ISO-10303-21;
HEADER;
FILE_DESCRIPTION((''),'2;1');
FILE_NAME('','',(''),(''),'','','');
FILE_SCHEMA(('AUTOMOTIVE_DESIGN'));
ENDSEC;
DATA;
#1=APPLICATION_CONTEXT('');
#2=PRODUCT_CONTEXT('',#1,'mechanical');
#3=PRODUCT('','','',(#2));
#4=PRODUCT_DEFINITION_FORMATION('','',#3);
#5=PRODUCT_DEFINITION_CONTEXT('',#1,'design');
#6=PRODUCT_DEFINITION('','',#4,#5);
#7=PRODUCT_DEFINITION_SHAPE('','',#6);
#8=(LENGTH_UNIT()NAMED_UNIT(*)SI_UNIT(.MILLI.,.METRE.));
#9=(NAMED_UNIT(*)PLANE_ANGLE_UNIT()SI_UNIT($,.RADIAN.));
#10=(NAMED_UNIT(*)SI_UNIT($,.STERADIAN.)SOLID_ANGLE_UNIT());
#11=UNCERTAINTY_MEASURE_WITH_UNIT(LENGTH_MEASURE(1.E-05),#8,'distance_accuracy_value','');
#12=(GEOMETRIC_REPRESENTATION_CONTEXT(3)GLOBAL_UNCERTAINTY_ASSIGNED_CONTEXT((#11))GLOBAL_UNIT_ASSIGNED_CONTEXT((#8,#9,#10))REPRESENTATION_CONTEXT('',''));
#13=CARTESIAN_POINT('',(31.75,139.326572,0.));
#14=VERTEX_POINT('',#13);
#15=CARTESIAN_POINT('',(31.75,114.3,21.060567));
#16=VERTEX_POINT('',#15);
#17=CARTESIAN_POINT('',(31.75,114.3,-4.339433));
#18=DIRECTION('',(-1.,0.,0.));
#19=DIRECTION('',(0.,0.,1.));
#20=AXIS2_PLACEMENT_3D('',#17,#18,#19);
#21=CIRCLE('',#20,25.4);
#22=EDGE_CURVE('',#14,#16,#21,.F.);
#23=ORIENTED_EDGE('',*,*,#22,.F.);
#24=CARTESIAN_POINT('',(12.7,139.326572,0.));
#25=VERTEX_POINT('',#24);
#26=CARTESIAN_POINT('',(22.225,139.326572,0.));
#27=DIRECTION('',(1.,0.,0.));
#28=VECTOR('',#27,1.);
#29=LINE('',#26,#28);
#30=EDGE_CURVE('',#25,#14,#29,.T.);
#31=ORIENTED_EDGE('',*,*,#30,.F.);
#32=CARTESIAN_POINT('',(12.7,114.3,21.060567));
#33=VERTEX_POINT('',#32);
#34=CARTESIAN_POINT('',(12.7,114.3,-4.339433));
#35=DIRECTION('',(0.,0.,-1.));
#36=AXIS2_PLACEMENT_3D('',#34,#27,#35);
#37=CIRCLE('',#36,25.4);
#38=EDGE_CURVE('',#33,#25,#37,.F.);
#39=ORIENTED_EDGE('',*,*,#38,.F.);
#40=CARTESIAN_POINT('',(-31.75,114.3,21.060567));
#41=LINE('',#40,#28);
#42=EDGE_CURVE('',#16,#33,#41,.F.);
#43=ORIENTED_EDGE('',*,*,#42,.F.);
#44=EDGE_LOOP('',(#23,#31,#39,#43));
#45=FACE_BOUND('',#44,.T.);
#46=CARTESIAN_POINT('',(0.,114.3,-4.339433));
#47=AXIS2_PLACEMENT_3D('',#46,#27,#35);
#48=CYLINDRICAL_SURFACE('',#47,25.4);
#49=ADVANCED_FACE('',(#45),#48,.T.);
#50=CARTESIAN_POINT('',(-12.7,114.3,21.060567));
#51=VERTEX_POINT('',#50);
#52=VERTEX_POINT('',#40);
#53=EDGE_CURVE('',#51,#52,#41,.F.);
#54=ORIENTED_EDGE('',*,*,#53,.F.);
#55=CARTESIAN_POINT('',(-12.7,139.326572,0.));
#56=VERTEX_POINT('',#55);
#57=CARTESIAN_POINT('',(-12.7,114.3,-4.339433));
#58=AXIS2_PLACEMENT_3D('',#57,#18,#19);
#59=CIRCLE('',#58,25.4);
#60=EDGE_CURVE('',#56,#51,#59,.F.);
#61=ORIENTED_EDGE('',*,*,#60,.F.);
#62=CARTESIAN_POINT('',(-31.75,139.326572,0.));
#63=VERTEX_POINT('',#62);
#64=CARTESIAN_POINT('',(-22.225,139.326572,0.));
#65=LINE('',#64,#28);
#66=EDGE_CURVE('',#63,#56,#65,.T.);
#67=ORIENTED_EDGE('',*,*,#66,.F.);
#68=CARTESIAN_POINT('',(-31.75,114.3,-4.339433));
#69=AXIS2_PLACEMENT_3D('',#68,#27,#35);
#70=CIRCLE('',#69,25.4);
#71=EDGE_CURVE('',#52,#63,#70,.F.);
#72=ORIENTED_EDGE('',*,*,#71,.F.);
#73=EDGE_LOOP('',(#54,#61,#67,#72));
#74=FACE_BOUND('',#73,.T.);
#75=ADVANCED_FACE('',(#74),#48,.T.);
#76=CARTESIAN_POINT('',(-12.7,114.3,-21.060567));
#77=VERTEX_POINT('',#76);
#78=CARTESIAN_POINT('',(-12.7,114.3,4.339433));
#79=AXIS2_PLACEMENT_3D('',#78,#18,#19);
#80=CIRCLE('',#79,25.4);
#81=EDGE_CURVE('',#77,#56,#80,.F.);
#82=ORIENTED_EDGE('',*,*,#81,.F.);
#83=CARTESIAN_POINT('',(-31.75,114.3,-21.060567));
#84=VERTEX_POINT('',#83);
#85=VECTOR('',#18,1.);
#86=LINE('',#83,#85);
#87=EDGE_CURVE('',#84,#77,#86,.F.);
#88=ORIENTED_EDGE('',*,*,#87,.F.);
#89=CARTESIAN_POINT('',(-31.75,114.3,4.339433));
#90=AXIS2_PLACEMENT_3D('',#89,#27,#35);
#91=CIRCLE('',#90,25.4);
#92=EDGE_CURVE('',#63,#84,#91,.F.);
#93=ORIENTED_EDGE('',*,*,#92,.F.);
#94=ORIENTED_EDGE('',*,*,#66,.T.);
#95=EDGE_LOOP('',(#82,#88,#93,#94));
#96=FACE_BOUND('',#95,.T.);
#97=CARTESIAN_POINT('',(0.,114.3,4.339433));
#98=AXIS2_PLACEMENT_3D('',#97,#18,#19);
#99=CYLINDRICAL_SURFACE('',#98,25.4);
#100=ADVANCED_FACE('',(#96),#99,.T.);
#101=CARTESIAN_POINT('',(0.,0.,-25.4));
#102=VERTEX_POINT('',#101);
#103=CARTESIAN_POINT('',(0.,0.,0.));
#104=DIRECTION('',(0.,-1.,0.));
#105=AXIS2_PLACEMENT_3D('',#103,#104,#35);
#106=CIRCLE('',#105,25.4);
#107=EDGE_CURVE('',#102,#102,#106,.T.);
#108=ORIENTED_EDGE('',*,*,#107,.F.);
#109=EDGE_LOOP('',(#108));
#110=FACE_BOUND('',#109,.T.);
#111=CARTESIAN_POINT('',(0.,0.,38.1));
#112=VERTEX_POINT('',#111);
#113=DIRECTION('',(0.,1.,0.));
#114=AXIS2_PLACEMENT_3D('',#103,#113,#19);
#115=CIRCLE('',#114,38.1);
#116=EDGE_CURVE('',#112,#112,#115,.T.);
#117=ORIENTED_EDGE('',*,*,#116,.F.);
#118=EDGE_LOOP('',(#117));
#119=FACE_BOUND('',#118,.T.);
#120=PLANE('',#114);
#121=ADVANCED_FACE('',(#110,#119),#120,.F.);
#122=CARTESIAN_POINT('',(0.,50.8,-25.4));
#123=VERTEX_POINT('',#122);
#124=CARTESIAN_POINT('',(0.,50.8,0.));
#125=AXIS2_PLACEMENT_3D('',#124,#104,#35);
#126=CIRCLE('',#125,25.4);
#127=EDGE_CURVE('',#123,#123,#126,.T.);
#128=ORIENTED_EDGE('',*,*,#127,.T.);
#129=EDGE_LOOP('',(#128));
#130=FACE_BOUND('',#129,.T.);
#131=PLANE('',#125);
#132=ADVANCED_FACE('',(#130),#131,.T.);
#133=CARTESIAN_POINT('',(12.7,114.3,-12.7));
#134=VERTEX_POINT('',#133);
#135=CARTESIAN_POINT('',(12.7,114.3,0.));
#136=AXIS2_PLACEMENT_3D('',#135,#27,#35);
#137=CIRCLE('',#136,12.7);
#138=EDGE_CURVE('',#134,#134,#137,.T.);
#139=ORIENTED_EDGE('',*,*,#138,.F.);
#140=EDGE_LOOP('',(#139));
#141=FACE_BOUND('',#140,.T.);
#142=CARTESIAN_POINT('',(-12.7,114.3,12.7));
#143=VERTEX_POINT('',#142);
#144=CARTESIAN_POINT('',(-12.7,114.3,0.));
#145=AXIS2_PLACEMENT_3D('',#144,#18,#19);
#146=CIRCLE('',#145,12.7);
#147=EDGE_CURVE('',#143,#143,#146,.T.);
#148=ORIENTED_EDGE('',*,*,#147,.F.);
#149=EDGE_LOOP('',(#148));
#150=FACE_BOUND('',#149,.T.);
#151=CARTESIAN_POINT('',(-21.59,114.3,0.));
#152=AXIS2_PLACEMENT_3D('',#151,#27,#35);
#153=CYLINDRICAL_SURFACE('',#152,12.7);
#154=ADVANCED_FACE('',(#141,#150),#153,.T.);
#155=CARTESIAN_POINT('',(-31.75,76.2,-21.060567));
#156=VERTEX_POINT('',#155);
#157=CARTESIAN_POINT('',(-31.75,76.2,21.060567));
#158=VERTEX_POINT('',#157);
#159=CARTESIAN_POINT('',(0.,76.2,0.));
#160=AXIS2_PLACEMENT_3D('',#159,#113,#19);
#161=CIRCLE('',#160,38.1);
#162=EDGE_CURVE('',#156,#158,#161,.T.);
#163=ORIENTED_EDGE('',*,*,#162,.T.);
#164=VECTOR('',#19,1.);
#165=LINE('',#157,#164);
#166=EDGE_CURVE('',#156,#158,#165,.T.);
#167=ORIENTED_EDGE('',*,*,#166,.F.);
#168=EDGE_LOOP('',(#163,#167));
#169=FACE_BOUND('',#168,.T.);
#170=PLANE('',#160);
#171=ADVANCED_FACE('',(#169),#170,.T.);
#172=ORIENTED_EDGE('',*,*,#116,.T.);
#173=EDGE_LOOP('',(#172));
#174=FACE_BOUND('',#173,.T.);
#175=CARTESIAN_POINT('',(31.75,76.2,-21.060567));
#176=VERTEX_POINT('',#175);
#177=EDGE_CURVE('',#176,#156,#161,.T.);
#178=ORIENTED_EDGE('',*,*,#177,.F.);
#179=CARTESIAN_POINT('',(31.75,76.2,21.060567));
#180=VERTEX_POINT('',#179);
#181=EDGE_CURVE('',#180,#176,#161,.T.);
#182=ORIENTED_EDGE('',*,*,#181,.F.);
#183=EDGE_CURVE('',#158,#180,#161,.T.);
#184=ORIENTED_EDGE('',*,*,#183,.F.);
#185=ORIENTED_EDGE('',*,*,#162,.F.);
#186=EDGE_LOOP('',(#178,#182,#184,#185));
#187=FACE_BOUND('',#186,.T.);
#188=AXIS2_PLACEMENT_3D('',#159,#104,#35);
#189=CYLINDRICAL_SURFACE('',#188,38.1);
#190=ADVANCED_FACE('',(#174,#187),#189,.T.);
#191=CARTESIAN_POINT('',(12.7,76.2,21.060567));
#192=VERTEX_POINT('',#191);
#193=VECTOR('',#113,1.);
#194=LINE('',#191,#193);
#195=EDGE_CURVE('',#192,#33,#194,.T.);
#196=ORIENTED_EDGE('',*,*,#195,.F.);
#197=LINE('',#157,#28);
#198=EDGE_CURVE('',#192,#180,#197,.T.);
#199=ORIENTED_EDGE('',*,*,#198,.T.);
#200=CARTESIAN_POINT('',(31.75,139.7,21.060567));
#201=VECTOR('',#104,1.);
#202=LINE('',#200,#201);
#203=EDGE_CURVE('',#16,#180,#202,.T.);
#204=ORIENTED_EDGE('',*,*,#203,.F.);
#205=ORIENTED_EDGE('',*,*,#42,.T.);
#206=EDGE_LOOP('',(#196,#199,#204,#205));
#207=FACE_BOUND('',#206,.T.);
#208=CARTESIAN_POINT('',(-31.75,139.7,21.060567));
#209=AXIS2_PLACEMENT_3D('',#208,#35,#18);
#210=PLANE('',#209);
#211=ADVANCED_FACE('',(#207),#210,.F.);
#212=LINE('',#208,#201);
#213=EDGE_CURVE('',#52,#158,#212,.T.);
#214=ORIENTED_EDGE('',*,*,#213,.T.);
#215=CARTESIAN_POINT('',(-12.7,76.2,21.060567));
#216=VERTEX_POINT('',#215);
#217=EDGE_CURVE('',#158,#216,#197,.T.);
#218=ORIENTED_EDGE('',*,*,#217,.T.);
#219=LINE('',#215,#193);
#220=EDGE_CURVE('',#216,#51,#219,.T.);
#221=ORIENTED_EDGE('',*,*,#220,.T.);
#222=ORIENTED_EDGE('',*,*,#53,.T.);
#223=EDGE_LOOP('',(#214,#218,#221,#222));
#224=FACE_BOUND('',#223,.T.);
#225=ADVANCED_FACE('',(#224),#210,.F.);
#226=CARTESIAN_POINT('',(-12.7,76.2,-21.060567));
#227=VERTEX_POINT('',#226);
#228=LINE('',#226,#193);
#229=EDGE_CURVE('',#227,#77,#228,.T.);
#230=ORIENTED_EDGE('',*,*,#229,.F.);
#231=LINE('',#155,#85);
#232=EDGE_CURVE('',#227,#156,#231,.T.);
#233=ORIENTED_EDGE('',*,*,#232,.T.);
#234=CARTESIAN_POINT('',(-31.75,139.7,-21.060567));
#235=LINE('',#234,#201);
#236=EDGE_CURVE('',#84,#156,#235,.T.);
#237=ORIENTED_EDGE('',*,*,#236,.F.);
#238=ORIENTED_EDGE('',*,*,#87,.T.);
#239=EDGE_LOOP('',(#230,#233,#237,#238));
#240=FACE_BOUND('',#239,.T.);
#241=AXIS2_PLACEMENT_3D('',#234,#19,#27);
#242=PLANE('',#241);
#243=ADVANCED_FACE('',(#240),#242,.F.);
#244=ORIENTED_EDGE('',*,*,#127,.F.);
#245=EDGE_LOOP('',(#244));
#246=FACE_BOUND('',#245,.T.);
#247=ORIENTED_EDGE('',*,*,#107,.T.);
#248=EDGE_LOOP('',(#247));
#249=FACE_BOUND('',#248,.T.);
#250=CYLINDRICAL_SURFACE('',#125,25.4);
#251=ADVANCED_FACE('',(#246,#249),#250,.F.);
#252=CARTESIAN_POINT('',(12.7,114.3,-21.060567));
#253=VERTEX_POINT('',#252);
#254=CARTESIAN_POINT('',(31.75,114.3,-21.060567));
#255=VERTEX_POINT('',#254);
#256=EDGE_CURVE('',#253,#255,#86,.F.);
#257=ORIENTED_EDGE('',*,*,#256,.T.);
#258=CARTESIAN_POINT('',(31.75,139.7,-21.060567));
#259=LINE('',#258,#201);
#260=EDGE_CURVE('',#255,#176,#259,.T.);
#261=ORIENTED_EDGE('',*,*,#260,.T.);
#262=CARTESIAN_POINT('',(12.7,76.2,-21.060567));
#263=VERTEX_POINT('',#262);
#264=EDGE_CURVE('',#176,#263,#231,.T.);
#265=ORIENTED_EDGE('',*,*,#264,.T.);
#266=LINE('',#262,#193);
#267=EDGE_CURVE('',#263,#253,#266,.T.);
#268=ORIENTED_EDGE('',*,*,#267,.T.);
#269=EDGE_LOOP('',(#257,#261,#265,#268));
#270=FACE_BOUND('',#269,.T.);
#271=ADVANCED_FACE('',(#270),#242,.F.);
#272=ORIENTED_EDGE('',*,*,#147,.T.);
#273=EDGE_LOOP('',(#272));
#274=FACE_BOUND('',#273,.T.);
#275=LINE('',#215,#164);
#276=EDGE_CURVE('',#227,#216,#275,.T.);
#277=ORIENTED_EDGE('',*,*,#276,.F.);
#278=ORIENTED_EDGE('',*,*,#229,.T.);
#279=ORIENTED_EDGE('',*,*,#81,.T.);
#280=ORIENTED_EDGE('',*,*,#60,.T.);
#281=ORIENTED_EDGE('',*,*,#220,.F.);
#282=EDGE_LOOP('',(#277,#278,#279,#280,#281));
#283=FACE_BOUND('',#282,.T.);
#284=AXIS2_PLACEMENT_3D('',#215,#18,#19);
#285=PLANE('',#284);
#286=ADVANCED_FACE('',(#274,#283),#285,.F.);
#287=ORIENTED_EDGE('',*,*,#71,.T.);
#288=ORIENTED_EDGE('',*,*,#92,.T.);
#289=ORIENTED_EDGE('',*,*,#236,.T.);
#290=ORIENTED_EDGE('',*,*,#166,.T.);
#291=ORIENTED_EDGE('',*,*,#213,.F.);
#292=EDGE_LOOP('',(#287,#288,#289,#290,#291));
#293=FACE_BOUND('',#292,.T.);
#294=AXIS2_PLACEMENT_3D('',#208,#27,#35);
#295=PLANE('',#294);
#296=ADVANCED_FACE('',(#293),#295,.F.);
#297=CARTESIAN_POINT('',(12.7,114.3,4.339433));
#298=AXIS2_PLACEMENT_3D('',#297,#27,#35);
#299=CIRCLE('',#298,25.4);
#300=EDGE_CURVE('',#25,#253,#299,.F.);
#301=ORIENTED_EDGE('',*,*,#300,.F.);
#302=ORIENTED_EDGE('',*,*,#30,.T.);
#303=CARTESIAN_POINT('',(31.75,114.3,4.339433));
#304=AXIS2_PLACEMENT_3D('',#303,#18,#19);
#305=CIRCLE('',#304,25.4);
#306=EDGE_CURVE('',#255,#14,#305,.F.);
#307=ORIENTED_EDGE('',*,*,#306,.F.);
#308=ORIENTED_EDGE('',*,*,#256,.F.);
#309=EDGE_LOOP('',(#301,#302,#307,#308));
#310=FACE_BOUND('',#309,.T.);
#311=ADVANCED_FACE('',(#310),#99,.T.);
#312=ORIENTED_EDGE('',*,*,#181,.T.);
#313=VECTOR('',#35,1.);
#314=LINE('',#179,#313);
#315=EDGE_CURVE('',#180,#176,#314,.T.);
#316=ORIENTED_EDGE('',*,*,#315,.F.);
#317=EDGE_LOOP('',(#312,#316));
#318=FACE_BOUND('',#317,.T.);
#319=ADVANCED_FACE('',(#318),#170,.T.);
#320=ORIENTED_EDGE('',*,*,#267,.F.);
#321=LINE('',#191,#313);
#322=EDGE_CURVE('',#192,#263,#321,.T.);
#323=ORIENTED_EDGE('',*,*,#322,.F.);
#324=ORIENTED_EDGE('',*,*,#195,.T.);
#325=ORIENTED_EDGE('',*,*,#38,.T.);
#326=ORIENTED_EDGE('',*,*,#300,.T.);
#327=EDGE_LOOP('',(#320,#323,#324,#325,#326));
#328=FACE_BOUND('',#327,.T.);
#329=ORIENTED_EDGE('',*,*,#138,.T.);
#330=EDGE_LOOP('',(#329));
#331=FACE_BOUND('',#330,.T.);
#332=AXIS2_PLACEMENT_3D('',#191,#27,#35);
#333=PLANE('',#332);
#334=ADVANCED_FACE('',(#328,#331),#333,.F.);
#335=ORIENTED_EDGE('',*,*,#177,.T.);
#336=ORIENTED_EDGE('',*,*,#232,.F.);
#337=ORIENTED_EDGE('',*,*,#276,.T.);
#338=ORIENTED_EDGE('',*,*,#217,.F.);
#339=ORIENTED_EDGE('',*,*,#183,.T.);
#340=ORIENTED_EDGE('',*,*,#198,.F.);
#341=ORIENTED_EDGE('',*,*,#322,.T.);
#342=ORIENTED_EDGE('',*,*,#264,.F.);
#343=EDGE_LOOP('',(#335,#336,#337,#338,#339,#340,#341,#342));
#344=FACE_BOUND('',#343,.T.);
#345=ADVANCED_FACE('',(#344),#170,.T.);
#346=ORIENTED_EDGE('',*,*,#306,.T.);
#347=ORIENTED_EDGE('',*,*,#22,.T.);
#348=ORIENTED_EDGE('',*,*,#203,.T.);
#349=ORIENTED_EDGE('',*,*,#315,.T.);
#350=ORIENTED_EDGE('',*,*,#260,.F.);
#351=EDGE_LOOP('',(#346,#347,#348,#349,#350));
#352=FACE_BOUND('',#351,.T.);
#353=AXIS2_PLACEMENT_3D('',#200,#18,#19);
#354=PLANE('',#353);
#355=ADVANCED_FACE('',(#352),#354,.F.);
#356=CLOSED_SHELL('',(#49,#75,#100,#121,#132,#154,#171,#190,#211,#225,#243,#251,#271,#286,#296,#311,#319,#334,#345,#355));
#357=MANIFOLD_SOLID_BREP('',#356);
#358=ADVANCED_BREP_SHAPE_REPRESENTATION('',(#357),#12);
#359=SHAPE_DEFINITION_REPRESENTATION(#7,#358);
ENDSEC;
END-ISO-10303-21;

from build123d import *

# Parameters (mm, degrees)
SKETCH1_R           = 38.1
BOSS_EXTRUDE1_DEPTH = 76.2
SKETCH2_W           = 63.5
SKETCH2_H           = 42.121134838
BOSS_EXTRUDE2_DEPTH = 63.5
SKETCH3_W           = 25.4
SKETCH3_H           = 42.121134838
CUT_EXTRUDE1_DEPTH  = 63.5
FILLET1_R           = 25.4
SKETCH5_R           = 25.4
CUT_EXTRUDE3_DEPTH  = 50.8
SKETCH6_R           = 12.7
BOSS_EXTRUDE3_DEPTH = 53.34


with BuildPart() as part:
    # Sketch1 → Boss-Extrude1 (new body)
    with BuildSketch(Plane(origin=(0, 0, 0), x_dir=(1, 0, 0), z_dir=(0, 1, 0))):
        with Locations(Location((0, 0, 0), (0, 0, 90))):
            Circle(SKETCH1_R)
    extrude(amount=BOSS_EXTRUDE1_DEPTH)

    # Sketch2 → Boss-Extrude2 (add)
    with BuildSketch(Plane(origin=(0, 76.2, 0), x_dir=(1, 0, 0), z_dir=(0, 1, 0))):
        Rectangle(SKETCH2_W, SKETCH2_H)
    extrude(amount=BOSS_EXTRUDE2_DEPTH)

    # Sketch3 → Cut-Extrude1 (cut)
    with BuildSketch(Plane(origin=(0, 139.7, 0), x_dir=(1, 0, 0), z_dir=(0, 1, 0))):
        Rectangle(SKETCH3_W, SKETCH3_H)
    extrude(amount=-CUT_EXTRUDE1_DEPTH, mode=Mode.SUBTRACT)

    # Fillet1
    # the kernel refuses this fillet: 25.4 mm, written as the material it takes off along each edge
    with BuildSketch(Plane(origin=(50.8, 139.7, -21.060567419), x_dir=(0, -1, 0), z_dir=(-1, 0, 0)), Plane(origin=(-95.25, 139.7, 21.060567419), x_dir=(0, -1, 0), z_dir=(1, 0, 0)), Plane(origin=(95.25, 139.7, -21.060567419), x_dir=(0, -1, 0), z_dir=(-1, 0, 0)), Plane(origin=(-50.8, 139.7, 21.060567419), x_dir=(0, -1, 0), z_dir=(1, 0, 0))) as fillet1_piece_1:
        with BuildLine():
            CenterArc((FILLET1_R, FILLET1_R), FILLET1_R, 180, 90)
            Line((0, FILLET1_R), (0, 0))
            Line((0, 0), (FILLET1_R, 0))
        make_face()
    extrude(amount=146.05, mode=Mode.SUBTRACT)

    # Sketch5 → Cut-Extrude3 (cut)
    with BuildSketch(Plane.XZ):
        with Locations(Location((0, 0, 0), (0, 0, 270))):
            Circle(SKETCH5_R)
    extrude(amount=-CUT_EXTRUDE3_DEPTH, mode=Mode.SUBTRACT)

    # Sketch6 → Boss-Extrude3 (add)
    with BuildSketch(Plane(origin=(31.75, 0, 0), x_dir=(0, 0, -1), z_dir=(1, 0, 0))):
        with Locations((0, 114.3)):
            Circle(SKETCH6_R)
    extrude(amount=-BOSS_EXTRUDE3_DEPTH)


solid = part.part
